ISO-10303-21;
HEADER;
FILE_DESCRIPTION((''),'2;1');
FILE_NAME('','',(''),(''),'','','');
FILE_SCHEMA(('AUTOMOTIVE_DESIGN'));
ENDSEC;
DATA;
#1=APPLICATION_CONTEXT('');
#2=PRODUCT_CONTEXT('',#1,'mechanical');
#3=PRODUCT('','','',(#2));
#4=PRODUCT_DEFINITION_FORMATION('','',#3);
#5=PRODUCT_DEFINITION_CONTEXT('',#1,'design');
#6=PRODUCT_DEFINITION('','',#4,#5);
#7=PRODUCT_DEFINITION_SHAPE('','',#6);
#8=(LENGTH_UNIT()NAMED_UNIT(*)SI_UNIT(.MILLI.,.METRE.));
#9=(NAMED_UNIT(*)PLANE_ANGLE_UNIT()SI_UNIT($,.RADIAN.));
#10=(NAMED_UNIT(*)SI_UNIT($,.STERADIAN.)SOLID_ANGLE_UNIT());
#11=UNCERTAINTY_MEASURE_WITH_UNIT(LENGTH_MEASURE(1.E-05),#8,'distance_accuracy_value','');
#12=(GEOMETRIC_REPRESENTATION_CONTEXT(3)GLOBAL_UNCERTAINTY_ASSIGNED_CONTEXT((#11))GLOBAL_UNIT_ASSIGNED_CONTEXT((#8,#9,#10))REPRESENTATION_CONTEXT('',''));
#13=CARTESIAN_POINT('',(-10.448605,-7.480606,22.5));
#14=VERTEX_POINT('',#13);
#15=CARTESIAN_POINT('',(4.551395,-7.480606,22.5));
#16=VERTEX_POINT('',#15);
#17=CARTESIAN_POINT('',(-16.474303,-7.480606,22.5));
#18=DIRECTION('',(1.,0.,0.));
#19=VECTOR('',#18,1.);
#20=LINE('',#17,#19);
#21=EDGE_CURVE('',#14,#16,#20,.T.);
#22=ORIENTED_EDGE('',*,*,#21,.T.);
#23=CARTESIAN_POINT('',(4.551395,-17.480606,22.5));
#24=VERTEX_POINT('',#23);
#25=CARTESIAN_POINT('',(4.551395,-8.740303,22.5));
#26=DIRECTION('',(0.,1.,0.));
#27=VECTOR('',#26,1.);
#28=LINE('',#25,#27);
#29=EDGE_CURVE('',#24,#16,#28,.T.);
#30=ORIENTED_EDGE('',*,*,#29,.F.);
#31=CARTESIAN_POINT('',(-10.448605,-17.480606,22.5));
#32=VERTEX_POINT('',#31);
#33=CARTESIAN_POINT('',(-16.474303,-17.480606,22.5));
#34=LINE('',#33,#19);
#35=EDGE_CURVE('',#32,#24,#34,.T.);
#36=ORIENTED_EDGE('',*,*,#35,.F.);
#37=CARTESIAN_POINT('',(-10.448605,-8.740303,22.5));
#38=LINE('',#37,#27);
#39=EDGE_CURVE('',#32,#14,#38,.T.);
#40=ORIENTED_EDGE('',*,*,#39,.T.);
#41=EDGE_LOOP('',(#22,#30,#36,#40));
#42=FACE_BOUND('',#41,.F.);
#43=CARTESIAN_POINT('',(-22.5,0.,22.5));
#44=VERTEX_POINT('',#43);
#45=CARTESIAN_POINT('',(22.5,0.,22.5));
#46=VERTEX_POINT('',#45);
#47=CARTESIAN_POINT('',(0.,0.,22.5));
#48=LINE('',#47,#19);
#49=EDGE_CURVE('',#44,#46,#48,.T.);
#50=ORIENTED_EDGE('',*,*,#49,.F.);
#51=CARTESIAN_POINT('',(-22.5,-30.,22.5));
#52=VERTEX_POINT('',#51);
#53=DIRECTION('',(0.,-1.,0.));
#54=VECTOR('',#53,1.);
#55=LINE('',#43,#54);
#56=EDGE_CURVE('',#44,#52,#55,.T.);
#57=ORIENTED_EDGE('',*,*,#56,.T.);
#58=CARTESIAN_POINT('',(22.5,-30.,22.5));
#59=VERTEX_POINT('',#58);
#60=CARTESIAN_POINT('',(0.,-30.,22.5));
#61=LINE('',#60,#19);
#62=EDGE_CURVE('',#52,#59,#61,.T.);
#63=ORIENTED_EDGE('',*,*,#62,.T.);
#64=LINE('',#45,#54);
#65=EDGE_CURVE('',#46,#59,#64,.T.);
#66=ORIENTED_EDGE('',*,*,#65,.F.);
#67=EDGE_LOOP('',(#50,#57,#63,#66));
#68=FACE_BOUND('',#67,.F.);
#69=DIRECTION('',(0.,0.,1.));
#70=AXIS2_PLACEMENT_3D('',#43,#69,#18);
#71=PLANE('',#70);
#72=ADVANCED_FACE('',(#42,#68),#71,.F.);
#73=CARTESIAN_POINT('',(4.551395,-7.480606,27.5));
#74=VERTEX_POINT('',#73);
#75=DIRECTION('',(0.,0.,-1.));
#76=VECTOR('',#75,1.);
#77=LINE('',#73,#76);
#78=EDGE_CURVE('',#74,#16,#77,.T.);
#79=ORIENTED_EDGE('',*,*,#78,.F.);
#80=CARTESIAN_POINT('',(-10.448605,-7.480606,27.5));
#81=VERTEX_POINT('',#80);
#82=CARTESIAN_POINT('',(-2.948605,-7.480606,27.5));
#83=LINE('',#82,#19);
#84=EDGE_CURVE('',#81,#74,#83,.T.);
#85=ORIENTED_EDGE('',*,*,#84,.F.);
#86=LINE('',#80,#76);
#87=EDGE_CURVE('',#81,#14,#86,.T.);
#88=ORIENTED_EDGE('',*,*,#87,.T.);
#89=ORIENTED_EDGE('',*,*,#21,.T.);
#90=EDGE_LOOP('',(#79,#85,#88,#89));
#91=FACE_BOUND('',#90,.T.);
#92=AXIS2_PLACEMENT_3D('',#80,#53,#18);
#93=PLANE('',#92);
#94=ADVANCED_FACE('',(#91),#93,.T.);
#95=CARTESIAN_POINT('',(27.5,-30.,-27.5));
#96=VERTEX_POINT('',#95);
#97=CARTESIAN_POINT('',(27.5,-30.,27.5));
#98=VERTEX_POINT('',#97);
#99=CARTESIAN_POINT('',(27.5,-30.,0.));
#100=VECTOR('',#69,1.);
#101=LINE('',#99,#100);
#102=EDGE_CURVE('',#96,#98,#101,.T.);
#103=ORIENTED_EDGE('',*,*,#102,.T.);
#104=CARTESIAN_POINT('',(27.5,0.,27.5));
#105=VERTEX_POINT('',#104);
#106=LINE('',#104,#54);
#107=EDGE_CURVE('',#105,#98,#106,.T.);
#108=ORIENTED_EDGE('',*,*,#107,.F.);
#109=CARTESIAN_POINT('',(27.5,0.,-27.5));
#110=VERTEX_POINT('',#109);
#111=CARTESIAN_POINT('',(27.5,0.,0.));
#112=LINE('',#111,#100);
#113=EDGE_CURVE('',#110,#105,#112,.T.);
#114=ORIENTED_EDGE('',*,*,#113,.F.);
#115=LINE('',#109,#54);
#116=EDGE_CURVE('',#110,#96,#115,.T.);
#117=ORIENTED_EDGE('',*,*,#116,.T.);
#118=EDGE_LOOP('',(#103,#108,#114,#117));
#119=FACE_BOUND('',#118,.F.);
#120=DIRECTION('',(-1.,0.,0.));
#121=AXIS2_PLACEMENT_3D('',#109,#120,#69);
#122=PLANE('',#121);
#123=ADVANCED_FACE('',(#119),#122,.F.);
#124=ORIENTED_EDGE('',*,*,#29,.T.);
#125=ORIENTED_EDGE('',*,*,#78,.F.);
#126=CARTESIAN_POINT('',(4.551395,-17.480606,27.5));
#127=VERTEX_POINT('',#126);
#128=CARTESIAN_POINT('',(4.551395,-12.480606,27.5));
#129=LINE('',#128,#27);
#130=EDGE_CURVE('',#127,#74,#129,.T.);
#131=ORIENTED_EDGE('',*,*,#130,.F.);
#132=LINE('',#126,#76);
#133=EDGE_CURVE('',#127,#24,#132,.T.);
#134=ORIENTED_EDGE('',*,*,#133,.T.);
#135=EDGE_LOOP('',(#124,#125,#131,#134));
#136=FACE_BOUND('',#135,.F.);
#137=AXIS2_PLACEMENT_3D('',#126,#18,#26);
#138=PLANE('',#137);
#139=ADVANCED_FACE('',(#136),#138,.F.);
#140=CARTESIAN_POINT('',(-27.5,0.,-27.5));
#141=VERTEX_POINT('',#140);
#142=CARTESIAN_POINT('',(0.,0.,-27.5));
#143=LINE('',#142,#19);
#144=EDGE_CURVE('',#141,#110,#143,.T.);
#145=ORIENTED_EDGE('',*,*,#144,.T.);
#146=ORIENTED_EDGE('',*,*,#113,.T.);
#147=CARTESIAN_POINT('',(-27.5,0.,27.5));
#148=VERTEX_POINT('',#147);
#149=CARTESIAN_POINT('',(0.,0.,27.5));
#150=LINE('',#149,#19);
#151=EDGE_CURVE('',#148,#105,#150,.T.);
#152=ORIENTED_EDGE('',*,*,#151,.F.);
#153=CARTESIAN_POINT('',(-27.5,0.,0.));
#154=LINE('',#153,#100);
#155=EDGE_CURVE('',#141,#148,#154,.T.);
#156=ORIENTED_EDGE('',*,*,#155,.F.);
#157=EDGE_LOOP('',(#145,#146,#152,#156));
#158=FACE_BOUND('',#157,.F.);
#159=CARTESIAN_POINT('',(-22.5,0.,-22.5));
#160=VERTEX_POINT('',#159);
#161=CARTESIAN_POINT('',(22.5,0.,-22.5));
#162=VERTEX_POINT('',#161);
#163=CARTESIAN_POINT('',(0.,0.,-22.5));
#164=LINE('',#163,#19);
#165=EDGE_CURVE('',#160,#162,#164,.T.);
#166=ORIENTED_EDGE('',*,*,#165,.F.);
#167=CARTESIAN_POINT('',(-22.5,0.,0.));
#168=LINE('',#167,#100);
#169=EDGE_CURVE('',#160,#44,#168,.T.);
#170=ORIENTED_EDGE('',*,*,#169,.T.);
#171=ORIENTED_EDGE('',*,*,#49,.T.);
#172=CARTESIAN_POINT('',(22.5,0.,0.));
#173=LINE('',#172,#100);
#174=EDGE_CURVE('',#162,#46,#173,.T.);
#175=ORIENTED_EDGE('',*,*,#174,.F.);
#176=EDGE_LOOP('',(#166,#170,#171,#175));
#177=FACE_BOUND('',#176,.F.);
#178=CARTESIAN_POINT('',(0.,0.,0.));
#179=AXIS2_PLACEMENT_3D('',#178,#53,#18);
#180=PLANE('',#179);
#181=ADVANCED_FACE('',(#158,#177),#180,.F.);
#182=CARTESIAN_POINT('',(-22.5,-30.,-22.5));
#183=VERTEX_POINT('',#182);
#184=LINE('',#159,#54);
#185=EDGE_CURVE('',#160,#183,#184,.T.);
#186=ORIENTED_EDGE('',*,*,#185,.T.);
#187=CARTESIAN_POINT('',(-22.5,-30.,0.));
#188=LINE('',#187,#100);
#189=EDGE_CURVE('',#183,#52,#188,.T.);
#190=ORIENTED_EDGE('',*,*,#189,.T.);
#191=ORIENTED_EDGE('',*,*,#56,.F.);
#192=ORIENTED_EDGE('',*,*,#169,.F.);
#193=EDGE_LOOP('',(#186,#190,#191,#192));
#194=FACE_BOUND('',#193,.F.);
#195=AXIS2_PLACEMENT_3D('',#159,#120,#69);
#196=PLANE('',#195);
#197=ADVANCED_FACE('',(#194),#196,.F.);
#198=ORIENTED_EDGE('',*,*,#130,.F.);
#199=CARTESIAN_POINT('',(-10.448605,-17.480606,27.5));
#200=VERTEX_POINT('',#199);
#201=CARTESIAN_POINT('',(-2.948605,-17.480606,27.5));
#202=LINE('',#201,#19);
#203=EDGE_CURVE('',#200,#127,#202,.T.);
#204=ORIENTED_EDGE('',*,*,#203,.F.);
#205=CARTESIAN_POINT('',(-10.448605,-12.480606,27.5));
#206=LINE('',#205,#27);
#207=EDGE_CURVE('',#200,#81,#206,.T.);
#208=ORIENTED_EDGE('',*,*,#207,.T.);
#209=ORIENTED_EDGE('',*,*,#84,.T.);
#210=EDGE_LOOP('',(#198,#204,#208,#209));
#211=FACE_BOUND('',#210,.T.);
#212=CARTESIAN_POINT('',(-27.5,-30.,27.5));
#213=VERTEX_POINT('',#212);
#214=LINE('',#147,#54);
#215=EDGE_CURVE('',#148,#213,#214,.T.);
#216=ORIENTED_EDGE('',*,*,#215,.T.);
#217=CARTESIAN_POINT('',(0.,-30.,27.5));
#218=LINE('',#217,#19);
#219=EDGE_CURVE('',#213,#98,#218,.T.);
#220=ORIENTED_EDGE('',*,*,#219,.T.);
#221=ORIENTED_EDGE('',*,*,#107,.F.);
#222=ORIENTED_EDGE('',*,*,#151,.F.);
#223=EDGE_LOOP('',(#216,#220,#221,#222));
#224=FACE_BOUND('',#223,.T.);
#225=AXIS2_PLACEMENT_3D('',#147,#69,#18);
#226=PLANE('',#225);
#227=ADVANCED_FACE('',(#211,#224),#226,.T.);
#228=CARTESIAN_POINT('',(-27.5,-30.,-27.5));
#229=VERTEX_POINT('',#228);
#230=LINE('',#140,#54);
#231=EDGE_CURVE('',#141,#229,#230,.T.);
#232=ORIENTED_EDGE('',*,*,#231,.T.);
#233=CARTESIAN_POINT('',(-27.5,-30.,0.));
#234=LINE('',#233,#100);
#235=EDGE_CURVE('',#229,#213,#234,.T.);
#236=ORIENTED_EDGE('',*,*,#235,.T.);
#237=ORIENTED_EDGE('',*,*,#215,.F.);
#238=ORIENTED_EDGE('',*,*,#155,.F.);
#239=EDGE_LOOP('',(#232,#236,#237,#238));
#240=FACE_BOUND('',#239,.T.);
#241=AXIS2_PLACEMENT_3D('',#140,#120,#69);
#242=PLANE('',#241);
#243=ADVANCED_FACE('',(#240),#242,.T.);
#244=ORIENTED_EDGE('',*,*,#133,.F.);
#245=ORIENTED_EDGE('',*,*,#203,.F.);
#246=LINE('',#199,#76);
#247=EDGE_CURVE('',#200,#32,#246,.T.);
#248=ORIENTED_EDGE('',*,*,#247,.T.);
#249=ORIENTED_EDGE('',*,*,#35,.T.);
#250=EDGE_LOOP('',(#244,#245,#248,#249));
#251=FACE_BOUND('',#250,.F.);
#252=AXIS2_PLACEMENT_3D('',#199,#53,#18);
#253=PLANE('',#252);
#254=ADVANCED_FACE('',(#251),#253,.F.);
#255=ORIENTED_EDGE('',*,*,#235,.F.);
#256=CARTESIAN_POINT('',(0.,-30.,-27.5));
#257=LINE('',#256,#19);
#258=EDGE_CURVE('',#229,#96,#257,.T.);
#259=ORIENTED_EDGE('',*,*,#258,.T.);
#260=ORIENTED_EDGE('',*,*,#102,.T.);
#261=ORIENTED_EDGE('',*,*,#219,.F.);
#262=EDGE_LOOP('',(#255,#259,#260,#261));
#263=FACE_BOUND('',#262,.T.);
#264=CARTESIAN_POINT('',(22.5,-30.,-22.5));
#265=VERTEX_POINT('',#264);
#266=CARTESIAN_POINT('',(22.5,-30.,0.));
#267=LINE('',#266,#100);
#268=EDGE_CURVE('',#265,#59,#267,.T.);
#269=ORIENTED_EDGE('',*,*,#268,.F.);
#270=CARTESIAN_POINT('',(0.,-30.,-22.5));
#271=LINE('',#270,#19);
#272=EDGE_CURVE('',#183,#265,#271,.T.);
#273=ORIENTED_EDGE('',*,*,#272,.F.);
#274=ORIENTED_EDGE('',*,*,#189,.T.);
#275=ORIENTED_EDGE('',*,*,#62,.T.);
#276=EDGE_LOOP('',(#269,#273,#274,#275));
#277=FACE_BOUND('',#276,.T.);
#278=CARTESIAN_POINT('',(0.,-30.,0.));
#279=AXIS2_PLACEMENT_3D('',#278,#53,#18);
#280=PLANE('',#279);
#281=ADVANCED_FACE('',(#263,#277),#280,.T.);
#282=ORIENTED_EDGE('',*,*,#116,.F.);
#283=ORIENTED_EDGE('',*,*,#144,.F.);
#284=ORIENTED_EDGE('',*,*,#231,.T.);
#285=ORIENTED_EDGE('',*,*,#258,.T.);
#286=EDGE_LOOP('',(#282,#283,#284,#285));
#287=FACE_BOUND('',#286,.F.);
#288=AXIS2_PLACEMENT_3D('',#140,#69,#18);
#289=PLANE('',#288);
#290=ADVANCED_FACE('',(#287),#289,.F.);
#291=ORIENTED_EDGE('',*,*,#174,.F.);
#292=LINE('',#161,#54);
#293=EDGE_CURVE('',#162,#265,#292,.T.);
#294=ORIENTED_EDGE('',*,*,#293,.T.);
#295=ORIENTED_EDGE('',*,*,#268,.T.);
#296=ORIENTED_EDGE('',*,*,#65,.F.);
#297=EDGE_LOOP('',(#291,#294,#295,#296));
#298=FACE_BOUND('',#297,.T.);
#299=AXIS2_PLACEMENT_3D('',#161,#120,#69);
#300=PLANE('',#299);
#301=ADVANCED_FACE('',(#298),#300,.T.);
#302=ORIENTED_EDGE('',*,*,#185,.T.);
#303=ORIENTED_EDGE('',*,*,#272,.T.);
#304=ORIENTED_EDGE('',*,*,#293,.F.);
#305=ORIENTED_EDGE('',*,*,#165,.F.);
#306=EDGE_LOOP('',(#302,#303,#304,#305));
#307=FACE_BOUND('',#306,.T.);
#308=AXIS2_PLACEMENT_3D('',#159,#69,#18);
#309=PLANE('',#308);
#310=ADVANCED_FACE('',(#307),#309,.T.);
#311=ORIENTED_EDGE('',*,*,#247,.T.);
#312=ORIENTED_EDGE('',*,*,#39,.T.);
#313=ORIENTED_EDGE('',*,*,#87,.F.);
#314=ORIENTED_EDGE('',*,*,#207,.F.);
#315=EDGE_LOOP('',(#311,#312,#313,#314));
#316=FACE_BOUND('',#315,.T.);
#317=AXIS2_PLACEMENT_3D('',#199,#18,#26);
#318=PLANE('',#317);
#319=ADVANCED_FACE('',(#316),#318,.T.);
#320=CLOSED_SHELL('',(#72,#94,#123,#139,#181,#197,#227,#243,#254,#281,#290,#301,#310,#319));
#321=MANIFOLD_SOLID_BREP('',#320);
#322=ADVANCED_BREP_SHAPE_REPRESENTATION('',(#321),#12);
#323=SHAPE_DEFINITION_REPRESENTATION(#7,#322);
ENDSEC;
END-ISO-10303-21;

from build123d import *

# Parameters (mm, degrees)
F0_W     = 55
F0_H     = 55
F0_W_2   = 45
F0_H_2   = 45
F1_DEPTH = 30
F2_W     = 15
F2_H     = 10
F3_DEPTH = 25


# Not quite as in the source:
# - a feature names something its author has since deleted; it is built from what else it names


with BuildPart() as f1:
    # F0 (on Front) → F1 (new body)
    with BuildSketch(Plane.XZ):
        Rectangle(F0_W, F0_H)
        Rectangle(F0_W_2, F0_H_2, mode=Mode.SUBTRACT)
    extrude(amount=F1_DEPTH)

    # F2 (on face) → F3 (cut)
    with BuildSketch(Plane.XY.offset(27.5)):
        with Locations((-2.9486052878, -12.4806062132)):
            Rectangle(F2_W, F2_H)
    extrude(amount=-F3_DEPTH, mode=Mode.SUBTRACT)


solid = f1.part
